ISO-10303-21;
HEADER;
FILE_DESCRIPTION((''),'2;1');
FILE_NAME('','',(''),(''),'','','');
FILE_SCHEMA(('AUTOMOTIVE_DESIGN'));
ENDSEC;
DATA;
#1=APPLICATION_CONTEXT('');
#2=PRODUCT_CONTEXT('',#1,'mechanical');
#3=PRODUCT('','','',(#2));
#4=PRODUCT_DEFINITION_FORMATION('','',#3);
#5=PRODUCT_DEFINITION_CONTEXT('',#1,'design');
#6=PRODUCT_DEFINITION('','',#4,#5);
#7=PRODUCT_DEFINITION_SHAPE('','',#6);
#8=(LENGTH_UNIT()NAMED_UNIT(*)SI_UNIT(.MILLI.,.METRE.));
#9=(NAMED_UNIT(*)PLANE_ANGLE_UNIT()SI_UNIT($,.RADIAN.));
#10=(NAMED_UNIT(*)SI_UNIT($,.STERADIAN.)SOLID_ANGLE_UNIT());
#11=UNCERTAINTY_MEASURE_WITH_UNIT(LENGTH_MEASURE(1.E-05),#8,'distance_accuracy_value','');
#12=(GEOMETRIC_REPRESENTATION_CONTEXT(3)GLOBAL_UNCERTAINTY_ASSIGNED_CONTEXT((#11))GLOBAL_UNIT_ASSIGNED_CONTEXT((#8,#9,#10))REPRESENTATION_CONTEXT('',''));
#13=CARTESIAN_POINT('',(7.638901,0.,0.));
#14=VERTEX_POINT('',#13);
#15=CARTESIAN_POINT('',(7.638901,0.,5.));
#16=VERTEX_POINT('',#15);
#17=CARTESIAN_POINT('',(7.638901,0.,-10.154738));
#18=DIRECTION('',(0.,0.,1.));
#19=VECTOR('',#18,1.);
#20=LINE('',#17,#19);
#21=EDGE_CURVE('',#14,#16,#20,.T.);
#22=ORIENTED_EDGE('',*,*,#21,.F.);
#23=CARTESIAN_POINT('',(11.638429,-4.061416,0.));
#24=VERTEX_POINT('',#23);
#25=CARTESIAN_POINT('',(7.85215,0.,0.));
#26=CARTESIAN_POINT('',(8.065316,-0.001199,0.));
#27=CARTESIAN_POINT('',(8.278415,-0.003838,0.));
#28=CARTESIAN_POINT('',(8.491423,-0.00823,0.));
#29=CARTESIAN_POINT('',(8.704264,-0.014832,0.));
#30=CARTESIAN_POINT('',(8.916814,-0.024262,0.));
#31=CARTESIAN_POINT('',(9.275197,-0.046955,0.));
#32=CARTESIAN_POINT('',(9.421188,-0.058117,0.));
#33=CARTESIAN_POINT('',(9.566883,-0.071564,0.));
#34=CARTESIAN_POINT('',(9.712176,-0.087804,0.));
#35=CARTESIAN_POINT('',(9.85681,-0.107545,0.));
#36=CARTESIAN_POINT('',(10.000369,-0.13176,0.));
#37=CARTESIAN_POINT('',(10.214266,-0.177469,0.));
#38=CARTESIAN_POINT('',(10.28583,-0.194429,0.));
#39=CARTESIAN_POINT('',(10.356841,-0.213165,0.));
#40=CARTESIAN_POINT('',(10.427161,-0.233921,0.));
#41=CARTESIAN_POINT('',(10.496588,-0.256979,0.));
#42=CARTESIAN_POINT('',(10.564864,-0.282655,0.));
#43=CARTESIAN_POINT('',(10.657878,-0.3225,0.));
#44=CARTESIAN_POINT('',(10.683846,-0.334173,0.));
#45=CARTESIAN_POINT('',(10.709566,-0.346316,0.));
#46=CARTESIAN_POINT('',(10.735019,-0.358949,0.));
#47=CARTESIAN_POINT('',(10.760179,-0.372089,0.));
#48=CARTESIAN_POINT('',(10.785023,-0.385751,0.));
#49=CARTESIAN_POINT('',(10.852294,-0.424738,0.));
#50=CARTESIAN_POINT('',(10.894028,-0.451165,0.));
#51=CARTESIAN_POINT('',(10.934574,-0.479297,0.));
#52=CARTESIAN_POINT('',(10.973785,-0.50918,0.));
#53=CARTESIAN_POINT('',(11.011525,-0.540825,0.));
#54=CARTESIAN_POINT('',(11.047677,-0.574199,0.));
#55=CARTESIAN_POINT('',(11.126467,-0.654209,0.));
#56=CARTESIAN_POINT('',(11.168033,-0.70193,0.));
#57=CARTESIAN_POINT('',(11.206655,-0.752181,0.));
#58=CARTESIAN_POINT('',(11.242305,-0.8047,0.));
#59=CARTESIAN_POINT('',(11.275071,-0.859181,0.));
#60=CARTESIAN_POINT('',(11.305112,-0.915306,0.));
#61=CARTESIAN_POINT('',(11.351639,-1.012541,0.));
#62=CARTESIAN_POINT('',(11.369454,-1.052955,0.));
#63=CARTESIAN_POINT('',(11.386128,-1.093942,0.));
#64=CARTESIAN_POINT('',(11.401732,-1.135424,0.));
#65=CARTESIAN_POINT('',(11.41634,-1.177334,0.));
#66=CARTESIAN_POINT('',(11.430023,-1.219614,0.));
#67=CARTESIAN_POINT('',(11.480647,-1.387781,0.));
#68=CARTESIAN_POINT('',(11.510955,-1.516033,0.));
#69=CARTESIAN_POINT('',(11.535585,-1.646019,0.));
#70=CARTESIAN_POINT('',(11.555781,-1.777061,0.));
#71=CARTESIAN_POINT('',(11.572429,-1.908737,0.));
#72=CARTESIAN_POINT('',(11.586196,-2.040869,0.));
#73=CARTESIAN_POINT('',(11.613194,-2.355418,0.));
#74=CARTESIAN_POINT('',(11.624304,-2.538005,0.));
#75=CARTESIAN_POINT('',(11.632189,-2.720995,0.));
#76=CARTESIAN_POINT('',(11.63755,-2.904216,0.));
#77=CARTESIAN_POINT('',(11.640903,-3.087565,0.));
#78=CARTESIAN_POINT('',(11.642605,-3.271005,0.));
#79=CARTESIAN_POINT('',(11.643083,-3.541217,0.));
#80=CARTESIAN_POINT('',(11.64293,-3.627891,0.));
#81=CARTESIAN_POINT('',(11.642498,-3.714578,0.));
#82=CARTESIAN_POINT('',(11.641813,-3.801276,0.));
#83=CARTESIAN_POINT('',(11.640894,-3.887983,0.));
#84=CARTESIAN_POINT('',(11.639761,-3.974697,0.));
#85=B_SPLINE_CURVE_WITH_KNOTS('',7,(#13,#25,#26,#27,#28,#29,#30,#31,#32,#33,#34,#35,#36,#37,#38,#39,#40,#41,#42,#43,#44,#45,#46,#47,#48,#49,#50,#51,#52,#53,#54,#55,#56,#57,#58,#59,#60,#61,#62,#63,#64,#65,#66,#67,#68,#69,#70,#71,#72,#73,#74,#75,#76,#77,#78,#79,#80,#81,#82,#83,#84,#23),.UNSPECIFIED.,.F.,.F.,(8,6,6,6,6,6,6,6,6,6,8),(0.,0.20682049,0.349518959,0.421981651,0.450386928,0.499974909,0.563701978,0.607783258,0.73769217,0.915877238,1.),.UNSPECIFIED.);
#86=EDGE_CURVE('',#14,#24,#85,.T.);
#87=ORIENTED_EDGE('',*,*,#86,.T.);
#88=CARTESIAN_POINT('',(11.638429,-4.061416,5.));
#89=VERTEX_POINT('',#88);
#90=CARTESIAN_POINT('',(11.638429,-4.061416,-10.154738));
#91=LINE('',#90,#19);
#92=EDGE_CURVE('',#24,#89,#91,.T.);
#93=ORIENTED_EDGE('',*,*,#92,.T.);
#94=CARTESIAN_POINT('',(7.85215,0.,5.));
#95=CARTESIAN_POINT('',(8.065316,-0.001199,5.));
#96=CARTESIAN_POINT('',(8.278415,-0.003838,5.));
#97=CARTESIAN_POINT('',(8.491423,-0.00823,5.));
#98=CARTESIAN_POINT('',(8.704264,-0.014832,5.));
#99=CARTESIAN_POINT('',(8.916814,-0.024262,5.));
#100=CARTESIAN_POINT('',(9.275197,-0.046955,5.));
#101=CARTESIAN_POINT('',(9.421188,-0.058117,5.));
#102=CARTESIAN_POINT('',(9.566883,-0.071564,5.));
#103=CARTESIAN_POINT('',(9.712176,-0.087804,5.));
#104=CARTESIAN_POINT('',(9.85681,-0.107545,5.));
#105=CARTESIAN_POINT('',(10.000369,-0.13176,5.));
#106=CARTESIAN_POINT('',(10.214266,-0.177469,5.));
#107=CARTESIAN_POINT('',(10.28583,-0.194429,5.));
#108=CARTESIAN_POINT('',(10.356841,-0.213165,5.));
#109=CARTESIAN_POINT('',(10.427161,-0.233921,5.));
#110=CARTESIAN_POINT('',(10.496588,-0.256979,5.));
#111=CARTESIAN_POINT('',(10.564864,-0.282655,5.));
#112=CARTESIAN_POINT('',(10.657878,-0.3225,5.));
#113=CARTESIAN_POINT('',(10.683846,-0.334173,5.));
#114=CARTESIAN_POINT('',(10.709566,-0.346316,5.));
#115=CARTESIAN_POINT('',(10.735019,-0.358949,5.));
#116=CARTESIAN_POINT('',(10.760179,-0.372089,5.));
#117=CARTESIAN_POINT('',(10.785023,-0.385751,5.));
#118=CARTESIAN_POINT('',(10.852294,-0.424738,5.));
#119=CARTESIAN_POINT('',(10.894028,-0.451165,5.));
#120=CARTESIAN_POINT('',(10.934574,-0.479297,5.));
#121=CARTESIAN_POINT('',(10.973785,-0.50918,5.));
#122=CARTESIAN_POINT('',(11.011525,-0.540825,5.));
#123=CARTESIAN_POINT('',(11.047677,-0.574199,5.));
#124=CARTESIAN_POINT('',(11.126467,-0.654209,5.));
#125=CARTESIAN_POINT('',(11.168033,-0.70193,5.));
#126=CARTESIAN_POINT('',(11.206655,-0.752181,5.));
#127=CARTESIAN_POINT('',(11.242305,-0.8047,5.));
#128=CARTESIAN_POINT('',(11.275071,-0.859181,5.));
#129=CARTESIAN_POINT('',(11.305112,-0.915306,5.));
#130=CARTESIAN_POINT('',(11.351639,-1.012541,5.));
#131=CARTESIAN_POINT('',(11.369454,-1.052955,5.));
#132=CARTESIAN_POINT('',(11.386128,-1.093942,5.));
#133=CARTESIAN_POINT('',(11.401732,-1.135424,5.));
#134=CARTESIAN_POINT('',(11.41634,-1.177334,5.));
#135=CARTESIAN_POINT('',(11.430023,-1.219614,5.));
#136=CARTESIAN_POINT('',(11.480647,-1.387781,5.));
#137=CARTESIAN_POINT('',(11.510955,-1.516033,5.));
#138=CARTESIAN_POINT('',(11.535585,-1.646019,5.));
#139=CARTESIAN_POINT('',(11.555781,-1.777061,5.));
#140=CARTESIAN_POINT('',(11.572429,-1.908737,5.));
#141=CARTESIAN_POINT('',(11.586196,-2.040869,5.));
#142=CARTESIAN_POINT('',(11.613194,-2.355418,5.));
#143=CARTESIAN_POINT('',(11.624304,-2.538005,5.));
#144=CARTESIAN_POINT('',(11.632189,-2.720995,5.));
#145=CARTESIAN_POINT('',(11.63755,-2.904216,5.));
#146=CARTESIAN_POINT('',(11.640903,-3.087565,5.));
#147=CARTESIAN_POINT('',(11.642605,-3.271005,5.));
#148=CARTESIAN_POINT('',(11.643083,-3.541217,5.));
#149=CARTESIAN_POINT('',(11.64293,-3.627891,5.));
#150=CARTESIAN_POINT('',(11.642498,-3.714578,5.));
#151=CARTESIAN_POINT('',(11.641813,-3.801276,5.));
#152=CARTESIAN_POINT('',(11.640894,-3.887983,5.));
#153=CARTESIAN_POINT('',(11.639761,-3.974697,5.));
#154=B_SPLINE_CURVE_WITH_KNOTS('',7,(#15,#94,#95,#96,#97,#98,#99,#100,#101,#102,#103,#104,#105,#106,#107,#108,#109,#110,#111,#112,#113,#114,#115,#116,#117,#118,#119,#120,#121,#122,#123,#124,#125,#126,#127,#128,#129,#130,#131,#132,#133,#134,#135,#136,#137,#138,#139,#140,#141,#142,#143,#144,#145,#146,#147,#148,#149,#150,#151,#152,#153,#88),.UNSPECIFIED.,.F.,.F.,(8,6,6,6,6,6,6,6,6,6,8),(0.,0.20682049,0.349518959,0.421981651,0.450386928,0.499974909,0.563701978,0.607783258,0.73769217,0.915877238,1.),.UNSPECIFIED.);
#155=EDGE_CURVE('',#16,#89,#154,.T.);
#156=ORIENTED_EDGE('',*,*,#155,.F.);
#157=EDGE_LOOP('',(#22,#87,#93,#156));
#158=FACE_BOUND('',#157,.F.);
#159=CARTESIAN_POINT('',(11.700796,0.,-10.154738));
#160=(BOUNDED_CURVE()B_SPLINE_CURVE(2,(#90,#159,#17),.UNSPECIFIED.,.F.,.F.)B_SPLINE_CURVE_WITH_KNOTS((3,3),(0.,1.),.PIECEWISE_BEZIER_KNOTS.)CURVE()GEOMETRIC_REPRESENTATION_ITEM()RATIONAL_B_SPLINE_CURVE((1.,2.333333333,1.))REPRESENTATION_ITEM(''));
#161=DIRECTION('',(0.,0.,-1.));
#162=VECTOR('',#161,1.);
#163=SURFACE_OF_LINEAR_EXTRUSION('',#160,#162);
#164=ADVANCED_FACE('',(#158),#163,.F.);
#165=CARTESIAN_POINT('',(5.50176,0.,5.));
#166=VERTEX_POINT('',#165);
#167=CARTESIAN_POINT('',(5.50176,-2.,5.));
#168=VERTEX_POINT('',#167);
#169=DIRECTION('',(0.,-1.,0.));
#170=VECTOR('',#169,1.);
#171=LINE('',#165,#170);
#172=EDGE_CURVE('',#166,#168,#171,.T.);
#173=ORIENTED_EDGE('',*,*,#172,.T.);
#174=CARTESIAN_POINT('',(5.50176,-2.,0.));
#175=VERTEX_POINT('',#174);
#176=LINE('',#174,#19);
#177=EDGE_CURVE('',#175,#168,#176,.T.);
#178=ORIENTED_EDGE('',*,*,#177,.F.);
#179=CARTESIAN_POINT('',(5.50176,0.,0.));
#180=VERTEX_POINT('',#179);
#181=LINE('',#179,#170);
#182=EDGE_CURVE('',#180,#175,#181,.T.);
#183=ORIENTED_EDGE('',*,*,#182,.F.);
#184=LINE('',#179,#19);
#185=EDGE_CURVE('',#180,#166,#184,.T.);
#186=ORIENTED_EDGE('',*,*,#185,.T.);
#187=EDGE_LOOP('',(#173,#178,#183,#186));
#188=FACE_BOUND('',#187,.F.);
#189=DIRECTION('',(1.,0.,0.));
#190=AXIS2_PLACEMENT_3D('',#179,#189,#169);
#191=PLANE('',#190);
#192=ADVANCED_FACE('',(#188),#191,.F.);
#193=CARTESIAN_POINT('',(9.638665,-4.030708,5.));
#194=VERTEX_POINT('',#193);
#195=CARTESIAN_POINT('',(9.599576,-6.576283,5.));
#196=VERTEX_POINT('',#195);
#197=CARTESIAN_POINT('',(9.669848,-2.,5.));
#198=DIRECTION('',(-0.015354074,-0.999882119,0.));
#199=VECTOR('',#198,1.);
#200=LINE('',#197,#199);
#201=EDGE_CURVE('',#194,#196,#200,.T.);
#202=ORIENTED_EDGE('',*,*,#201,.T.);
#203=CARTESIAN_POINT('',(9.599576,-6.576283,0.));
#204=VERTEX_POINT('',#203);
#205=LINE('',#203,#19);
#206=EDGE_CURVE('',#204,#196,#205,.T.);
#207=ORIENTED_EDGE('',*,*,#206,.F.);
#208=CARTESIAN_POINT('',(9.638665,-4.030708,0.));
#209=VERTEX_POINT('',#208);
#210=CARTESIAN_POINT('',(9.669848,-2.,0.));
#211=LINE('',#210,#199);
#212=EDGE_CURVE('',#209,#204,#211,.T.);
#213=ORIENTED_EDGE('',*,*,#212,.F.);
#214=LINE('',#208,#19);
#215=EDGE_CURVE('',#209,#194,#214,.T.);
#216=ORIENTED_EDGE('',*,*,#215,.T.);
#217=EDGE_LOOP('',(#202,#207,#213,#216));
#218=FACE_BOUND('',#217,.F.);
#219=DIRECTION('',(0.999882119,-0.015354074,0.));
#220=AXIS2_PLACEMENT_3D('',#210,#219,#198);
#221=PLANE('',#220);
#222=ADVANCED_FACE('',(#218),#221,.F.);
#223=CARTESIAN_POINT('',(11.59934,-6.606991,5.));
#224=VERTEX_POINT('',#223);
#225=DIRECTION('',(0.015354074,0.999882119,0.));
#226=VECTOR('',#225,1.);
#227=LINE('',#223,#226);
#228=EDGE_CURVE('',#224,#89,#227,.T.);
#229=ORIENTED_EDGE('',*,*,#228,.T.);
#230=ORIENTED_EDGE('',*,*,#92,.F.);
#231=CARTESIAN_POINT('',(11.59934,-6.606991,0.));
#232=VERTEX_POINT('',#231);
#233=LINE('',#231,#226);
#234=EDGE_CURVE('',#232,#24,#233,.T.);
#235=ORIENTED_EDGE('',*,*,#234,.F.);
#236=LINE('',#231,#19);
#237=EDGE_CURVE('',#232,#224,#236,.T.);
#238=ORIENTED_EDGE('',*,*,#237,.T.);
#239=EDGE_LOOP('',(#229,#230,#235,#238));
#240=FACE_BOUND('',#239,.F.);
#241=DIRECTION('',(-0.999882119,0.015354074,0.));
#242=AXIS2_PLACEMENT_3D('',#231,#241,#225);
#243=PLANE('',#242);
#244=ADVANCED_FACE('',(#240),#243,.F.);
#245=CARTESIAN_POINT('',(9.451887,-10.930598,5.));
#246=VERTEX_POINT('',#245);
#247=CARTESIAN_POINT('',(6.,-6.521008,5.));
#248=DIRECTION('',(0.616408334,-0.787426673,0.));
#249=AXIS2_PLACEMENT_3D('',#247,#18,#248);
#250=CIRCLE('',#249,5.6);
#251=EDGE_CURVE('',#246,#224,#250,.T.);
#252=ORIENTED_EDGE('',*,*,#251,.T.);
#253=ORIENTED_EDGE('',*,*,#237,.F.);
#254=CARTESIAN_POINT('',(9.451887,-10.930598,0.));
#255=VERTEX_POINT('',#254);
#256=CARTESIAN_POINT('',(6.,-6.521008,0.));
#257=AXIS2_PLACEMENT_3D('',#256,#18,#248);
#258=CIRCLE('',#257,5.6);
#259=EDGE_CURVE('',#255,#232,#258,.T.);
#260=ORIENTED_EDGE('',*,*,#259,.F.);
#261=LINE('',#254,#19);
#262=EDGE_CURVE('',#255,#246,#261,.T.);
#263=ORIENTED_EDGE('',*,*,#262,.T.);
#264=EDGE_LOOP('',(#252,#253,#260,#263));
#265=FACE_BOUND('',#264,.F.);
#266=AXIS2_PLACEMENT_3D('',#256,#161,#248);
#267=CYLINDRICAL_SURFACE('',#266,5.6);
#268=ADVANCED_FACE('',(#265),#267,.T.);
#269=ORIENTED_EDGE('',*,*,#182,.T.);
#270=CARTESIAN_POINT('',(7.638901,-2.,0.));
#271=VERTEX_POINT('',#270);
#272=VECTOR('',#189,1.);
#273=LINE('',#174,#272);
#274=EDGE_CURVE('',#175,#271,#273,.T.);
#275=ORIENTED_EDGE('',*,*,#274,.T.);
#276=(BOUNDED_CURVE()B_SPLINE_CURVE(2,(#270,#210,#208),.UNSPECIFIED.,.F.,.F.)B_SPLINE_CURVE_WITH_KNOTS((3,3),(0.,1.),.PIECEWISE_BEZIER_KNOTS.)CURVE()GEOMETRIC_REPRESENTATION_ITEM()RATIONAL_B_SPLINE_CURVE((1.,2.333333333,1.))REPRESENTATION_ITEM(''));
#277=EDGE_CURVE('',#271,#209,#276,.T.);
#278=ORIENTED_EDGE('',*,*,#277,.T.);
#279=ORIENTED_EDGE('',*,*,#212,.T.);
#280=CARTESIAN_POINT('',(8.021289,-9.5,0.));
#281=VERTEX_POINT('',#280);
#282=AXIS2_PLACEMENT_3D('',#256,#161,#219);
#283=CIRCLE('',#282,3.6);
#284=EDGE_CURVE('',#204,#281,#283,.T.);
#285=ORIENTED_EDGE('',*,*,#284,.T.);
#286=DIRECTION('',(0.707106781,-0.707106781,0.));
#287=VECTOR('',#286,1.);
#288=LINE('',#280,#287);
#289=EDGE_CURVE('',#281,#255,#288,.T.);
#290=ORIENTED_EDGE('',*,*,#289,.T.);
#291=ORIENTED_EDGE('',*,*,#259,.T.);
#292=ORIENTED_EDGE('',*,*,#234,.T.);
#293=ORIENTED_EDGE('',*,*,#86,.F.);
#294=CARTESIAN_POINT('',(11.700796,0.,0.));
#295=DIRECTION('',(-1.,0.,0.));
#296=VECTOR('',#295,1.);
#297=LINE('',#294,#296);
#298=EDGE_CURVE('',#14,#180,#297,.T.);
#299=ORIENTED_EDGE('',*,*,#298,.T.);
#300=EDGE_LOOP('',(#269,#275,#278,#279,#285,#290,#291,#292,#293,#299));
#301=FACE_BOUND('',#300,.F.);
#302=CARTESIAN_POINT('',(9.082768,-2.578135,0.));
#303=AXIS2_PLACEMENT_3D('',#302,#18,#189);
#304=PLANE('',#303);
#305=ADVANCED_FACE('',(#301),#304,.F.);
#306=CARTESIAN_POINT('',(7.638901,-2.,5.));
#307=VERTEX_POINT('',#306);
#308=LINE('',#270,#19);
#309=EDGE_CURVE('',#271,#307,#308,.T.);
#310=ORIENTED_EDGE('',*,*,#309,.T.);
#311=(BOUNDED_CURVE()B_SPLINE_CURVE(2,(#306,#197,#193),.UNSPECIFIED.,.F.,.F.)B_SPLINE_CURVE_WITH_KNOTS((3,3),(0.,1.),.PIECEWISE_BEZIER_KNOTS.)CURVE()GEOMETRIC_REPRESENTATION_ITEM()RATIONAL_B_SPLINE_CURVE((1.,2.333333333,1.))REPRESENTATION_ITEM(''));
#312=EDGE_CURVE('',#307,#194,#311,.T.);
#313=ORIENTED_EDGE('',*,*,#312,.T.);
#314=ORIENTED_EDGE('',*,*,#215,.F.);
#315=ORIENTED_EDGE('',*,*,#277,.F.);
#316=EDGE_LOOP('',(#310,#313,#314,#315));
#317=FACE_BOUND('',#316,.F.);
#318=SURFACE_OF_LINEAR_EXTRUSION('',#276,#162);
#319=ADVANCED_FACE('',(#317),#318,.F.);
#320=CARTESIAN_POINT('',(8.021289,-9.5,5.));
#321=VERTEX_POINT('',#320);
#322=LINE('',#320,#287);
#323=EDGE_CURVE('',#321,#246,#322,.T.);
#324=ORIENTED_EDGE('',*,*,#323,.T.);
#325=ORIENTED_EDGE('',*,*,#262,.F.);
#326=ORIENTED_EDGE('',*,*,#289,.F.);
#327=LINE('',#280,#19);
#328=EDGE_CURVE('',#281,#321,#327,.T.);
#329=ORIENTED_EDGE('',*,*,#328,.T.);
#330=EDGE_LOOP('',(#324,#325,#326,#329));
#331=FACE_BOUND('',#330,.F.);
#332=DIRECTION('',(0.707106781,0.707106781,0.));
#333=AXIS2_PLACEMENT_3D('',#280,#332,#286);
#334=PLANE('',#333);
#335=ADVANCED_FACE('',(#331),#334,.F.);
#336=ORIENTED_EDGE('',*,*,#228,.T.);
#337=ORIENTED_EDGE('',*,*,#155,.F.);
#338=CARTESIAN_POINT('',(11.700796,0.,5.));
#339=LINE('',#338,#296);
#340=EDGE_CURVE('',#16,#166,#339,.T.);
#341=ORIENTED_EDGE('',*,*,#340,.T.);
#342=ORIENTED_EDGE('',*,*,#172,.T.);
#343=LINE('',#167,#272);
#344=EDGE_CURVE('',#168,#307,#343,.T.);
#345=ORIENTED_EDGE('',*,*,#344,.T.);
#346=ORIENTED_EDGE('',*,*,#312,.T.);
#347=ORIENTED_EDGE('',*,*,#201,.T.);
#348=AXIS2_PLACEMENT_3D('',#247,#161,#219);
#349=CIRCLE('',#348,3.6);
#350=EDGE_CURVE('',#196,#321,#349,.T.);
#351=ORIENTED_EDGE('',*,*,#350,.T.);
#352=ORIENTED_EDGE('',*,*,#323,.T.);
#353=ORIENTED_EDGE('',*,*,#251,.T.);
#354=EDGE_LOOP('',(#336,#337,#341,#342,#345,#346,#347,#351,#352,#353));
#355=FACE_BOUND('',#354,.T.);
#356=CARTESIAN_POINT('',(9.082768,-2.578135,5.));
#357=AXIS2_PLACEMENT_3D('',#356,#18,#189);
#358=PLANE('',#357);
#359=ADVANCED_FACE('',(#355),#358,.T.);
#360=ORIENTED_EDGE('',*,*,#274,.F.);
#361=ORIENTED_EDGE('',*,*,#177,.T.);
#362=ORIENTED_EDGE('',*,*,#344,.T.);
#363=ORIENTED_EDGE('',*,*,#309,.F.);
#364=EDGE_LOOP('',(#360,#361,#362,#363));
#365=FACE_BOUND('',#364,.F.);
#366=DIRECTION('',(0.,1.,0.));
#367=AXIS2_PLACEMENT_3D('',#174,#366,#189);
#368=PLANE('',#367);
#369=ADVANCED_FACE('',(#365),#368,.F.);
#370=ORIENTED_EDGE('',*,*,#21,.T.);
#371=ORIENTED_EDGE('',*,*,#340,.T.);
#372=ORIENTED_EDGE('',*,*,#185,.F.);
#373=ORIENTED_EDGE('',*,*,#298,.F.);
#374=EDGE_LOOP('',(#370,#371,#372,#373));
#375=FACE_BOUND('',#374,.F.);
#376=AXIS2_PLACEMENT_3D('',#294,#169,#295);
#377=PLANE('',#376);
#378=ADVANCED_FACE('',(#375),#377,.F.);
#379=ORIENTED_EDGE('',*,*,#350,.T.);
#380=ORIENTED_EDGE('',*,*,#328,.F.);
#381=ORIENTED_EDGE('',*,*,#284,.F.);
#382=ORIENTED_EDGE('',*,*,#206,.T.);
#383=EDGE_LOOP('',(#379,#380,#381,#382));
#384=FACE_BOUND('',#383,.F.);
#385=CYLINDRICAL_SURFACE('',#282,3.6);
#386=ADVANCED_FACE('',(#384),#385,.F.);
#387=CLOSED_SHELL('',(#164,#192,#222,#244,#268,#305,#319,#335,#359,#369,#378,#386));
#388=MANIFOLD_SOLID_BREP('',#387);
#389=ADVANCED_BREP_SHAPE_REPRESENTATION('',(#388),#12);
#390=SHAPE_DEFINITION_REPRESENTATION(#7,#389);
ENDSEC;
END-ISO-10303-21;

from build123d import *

# Parameters (mm, degrees)
F3_DEPTH    = 5
F4_T1_DEPTH = 5
F5_T1_DEPTH = 25.3094755674


# Not quite as in the source:
# - a fillet or chamfer that OpenCascade refuses, or shapes differently, is made with other operations: its cross-section is extruded or revolved along the edge and cut away or added
# - a feature of the source that left no trace in its solid (it failed there, or was rolled back) is left out


with BuildPart() as f3:
    # F2 (on Top) → F3 (new body)
    with BuildSketch(Plane.XY):
        with BuildLine():
            Line((5.5017601699, 0), (5.5017601699, -2))
            Line((5.5017601699, -2), (9.6698484997, -2))
            Line((9.6698484997, -2), (9.5995756294, -6.5762830432))
            ThreePointArc((9.5995756294, -6.5762830432), (9.167895168, -8.2311078505), (8.0212889249, -9.5))
            Line((8.0212889249, -9.5), (9.4518866721, -10.9305977473))
            ThreePointArc((9.4518866721, -10.9305977473), (11.0154330705, -9.0120786534), (11.5993398679, -6.6069911903))
            Line((11.5993398679, -6.6069911903), (11.7007960564, 0))
            Line((11.7007960564, 0), (5.5017601699, 0))
        make_face()
    extrude(amount=F3_DEPTH)

    # F4: fillet of radius 2 on 1 edges, made by hand

    # F4_s2 → F4_t1 (join)
    with BuildSketch(Plane.XY):
        with BuildLine():
            add(Edge.make_bspline(
                [(7.638900943, -2), (9.6698484997, -2), (9.6386651815, -4.0307081471)],
                knots=[0, 0, 0, 1, 1, 1], degree=2, weights=[1, 2.3333333333, 1]))
            Line((9.6386651815, -4.0307081471), (9.6698484997, -2))
            Line((9.6698484997, -2), (7.638900943, -2))
        make_face()
    extrude(amount=F4_T1_DEPTH)

    # F5: fillet of radius 4 on 1 edges, made by hand

    # F5_s2 → F5_t1 (cut)
    with BuildSketch(Plane.XY.offset(-10.1547377837)):
        with BuildLine():
            add(Edge.make_bspline(
                [(11.63842942, -4.0614162943), (11.7007960564, 0), (7.638900943, 0)],
                knots=[0, 0, 0, 1, 1, 1], degree=2, weights=[1, 2.3333333333, 1]))
            Line((7.638900943, 0), (11.7007960564, 0))
            Line((11.7007960564, 0), (11.63842942, -4.0614162943))
        make_face()
    extrude(amount=F5_T1_DEPTH, mode=Mode.SUBTRACT)


solid = f3.part
